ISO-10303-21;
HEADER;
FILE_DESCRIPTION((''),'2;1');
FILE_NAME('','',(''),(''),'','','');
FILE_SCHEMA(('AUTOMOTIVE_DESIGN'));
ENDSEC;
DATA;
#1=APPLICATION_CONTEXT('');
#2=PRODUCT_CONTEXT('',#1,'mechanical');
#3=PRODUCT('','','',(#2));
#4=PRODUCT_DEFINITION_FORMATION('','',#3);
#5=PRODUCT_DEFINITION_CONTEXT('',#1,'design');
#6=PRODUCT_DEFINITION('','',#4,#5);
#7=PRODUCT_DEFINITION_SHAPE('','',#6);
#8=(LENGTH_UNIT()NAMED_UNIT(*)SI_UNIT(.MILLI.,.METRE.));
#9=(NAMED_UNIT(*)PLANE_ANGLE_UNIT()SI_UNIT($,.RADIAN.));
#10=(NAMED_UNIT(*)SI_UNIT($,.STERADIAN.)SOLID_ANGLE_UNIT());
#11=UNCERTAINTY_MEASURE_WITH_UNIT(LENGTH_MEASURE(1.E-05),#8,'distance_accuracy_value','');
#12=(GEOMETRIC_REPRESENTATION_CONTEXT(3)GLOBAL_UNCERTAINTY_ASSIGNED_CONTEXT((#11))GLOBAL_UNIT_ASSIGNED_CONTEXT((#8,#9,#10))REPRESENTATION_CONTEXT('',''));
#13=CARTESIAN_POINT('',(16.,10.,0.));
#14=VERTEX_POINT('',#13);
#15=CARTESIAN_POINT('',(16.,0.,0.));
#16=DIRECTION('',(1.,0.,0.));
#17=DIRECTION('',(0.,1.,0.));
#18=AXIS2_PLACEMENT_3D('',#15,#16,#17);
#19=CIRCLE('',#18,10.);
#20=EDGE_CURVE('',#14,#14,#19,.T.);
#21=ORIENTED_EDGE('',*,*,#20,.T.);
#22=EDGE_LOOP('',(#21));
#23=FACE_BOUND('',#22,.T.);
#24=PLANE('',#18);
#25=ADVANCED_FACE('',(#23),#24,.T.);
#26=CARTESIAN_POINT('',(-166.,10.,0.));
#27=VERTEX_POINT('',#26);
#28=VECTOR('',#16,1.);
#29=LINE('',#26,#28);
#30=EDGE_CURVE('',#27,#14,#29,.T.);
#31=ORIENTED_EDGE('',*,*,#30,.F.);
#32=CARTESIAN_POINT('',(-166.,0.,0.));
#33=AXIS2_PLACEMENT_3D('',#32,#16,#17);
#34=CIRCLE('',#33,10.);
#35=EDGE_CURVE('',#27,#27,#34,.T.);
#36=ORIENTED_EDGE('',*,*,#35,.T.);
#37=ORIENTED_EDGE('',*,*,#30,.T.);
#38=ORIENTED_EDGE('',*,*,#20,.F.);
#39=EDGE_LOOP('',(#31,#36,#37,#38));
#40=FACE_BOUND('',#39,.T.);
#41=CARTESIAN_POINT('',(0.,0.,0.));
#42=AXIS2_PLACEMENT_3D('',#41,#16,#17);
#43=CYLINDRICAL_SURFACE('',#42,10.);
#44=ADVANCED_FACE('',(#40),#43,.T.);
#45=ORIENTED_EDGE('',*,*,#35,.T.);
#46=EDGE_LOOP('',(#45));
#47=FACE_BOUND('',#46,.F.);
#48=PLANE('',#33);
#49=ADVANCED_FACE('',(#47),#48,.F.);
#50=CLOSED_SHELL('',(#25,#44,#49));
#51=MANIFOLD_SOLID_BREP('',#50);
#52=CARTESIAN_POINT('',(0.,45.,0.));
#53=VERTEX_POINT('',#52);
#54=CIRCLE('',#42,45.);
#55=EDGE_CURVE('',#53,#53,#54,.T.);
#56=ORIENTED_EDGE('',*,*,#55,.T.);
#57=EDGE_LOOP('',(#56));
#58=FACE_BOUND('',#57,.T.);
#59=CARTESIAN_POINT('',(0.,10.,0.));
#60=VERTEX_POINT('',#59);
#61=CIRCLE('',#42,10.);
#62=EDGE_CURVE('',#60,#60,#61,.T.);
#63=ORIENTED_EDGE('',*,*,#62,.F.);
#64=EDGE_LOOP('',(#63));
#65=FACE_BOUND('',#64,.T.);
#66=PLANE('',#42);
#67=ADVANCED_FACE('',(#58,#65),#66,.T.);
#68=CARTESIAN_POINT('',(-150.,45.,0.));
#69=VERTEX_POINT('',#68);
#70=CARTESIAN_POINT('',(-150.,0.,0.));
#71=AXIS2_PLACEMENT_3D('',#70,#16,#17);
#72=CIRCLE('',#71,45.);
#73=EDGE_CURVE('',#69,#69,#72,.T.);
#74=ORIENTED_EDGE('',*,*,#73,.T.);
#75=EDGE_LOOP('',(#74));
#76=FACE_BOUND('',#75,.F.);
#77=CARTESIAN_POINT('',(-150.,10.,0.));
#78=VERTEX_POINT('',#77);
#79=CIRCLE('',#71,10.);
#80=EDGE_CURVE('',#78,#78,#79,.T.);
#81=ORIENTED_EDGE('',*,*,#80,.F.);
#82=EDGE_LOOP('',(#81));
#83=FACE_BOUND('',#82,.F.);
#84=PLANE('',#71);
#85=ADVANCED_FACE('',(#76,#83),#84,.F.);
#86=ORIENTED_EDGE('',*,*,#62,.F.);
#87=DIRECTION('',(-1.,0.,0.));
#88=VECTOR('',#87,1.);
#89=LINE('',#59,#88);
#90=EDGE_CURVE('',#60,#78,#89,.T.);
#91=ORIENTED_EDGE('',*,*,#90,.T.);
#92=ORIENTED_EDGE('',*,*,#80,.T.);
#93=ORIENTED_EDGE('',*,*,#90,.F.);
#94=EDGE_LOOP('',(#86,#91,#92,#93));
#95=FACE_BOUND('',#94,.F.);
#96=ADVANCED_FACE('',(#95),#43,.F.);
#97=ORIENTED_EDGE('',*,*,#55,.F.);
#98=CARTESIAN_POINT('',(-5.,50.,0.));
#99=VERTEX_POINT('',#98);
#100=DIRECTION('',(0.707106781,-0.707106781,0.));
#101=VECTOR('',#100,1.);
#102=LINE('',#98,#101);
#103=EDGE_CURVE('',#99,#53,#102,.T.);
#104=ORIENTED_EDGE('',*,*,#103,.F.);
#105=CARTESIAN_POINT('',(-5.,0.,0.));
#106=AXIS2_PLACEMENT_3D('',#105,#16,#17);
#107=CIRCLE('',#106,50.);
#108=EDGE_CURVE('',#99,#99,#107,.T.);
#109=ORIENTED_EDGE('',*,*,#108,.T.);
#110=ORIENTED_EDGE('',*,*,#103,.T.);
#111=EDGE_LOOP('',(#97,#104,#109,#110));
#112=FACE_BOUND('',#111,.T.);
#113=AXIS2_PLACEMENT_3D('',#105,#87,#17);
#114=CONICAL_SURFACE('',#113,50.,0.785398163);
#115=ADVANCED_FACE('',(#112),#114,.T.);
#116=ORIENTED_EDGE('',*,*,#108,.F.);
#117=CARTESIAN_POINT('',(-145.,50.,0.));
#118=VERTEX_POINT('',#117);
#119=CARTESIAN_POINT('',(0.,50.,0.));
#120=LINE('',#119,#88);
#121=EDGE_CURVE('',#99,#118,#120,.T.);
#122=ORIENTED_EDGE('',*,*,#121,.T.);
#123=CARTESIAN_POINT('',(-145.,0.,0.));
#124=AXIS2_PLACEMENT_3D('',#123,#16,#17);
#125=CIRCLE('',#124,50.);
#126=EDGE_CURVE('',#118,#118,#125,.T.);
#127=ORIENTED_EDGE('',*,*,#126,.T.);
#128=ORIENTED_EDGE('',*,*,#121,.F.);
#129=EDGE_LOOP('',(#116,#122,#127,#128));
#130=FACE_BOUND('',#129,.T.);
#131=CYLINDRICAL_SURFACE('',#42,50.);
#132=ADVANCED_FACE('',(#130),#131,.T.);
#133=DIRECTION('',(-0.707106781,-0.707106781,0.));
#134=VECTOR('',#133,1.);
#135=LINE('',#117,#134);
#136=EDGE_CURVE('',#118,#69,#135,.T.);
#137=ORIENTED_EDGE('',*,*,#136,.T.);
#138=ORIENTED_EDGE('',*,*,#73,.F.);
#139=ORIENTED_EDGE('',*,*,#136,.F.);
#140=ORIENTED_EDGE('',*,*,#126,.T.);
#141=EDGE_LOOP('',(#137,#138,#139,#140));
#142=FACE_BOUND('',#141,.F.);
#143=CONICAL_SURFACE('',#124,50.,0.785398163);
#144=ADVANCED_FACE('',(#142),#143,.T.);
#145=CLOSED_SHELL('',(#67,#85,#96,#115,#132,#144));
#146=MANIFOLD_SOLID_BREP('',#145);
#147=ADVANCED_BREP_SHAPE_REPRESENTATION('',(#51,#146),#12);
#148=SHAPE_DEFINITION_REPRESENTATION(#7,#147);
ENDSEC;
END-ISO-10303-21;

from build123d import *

# Parameters (mm, degrees)
F0_R     = 10
F1_DEPTH = 16
F0_R_2   = 50
F2_DEPTH = 150
F3_SIZE2 = 5
F3_SIZE  = 5
F4_SIZE2 = 5
F4_SIZE  = 5
F5_DEPTH = 166


with BuildPart() as f1:
    # F0 (on Right) → F1 (new body)
    with BuildSketch(Plane.YZ):
        Circle(F0_R)
    extrude(amount=F1_DEPTH)

    # F0 (on Right) → F5 (join)
    with BuildSketch(Plane.YZ):
        Circle(F0_R)
    extrude(amount=-F5_DEPTH)


with BuildPart() as f2:
    # F0 (on Right) → F2 (new body)
    with BuildSketch(Plane.YZ):
        Circle(F0_R_2)
        Circle(F0_R, mode=Mode.SUBTRACT)
    extrude(amount=-F2_DEPTH)

    # F3
    f3_edges = [f2.edges().sort_by_distance(p)[0] for p in [
        (0, -50, 0),
    ]]
    chamfer(f3_edges, length=F3_SIZE, length2=F3_SIZE2)

    # F4
    f4_edges = [f2.edges().sort_by_distance(p)[0] for p in [
        (-150, -50, 0),
    ]]
    chamfer(f4_edges, length=F4_SIZE, length2=F4_SIZE2)


solid = Compound([f1.part, f2.part])
